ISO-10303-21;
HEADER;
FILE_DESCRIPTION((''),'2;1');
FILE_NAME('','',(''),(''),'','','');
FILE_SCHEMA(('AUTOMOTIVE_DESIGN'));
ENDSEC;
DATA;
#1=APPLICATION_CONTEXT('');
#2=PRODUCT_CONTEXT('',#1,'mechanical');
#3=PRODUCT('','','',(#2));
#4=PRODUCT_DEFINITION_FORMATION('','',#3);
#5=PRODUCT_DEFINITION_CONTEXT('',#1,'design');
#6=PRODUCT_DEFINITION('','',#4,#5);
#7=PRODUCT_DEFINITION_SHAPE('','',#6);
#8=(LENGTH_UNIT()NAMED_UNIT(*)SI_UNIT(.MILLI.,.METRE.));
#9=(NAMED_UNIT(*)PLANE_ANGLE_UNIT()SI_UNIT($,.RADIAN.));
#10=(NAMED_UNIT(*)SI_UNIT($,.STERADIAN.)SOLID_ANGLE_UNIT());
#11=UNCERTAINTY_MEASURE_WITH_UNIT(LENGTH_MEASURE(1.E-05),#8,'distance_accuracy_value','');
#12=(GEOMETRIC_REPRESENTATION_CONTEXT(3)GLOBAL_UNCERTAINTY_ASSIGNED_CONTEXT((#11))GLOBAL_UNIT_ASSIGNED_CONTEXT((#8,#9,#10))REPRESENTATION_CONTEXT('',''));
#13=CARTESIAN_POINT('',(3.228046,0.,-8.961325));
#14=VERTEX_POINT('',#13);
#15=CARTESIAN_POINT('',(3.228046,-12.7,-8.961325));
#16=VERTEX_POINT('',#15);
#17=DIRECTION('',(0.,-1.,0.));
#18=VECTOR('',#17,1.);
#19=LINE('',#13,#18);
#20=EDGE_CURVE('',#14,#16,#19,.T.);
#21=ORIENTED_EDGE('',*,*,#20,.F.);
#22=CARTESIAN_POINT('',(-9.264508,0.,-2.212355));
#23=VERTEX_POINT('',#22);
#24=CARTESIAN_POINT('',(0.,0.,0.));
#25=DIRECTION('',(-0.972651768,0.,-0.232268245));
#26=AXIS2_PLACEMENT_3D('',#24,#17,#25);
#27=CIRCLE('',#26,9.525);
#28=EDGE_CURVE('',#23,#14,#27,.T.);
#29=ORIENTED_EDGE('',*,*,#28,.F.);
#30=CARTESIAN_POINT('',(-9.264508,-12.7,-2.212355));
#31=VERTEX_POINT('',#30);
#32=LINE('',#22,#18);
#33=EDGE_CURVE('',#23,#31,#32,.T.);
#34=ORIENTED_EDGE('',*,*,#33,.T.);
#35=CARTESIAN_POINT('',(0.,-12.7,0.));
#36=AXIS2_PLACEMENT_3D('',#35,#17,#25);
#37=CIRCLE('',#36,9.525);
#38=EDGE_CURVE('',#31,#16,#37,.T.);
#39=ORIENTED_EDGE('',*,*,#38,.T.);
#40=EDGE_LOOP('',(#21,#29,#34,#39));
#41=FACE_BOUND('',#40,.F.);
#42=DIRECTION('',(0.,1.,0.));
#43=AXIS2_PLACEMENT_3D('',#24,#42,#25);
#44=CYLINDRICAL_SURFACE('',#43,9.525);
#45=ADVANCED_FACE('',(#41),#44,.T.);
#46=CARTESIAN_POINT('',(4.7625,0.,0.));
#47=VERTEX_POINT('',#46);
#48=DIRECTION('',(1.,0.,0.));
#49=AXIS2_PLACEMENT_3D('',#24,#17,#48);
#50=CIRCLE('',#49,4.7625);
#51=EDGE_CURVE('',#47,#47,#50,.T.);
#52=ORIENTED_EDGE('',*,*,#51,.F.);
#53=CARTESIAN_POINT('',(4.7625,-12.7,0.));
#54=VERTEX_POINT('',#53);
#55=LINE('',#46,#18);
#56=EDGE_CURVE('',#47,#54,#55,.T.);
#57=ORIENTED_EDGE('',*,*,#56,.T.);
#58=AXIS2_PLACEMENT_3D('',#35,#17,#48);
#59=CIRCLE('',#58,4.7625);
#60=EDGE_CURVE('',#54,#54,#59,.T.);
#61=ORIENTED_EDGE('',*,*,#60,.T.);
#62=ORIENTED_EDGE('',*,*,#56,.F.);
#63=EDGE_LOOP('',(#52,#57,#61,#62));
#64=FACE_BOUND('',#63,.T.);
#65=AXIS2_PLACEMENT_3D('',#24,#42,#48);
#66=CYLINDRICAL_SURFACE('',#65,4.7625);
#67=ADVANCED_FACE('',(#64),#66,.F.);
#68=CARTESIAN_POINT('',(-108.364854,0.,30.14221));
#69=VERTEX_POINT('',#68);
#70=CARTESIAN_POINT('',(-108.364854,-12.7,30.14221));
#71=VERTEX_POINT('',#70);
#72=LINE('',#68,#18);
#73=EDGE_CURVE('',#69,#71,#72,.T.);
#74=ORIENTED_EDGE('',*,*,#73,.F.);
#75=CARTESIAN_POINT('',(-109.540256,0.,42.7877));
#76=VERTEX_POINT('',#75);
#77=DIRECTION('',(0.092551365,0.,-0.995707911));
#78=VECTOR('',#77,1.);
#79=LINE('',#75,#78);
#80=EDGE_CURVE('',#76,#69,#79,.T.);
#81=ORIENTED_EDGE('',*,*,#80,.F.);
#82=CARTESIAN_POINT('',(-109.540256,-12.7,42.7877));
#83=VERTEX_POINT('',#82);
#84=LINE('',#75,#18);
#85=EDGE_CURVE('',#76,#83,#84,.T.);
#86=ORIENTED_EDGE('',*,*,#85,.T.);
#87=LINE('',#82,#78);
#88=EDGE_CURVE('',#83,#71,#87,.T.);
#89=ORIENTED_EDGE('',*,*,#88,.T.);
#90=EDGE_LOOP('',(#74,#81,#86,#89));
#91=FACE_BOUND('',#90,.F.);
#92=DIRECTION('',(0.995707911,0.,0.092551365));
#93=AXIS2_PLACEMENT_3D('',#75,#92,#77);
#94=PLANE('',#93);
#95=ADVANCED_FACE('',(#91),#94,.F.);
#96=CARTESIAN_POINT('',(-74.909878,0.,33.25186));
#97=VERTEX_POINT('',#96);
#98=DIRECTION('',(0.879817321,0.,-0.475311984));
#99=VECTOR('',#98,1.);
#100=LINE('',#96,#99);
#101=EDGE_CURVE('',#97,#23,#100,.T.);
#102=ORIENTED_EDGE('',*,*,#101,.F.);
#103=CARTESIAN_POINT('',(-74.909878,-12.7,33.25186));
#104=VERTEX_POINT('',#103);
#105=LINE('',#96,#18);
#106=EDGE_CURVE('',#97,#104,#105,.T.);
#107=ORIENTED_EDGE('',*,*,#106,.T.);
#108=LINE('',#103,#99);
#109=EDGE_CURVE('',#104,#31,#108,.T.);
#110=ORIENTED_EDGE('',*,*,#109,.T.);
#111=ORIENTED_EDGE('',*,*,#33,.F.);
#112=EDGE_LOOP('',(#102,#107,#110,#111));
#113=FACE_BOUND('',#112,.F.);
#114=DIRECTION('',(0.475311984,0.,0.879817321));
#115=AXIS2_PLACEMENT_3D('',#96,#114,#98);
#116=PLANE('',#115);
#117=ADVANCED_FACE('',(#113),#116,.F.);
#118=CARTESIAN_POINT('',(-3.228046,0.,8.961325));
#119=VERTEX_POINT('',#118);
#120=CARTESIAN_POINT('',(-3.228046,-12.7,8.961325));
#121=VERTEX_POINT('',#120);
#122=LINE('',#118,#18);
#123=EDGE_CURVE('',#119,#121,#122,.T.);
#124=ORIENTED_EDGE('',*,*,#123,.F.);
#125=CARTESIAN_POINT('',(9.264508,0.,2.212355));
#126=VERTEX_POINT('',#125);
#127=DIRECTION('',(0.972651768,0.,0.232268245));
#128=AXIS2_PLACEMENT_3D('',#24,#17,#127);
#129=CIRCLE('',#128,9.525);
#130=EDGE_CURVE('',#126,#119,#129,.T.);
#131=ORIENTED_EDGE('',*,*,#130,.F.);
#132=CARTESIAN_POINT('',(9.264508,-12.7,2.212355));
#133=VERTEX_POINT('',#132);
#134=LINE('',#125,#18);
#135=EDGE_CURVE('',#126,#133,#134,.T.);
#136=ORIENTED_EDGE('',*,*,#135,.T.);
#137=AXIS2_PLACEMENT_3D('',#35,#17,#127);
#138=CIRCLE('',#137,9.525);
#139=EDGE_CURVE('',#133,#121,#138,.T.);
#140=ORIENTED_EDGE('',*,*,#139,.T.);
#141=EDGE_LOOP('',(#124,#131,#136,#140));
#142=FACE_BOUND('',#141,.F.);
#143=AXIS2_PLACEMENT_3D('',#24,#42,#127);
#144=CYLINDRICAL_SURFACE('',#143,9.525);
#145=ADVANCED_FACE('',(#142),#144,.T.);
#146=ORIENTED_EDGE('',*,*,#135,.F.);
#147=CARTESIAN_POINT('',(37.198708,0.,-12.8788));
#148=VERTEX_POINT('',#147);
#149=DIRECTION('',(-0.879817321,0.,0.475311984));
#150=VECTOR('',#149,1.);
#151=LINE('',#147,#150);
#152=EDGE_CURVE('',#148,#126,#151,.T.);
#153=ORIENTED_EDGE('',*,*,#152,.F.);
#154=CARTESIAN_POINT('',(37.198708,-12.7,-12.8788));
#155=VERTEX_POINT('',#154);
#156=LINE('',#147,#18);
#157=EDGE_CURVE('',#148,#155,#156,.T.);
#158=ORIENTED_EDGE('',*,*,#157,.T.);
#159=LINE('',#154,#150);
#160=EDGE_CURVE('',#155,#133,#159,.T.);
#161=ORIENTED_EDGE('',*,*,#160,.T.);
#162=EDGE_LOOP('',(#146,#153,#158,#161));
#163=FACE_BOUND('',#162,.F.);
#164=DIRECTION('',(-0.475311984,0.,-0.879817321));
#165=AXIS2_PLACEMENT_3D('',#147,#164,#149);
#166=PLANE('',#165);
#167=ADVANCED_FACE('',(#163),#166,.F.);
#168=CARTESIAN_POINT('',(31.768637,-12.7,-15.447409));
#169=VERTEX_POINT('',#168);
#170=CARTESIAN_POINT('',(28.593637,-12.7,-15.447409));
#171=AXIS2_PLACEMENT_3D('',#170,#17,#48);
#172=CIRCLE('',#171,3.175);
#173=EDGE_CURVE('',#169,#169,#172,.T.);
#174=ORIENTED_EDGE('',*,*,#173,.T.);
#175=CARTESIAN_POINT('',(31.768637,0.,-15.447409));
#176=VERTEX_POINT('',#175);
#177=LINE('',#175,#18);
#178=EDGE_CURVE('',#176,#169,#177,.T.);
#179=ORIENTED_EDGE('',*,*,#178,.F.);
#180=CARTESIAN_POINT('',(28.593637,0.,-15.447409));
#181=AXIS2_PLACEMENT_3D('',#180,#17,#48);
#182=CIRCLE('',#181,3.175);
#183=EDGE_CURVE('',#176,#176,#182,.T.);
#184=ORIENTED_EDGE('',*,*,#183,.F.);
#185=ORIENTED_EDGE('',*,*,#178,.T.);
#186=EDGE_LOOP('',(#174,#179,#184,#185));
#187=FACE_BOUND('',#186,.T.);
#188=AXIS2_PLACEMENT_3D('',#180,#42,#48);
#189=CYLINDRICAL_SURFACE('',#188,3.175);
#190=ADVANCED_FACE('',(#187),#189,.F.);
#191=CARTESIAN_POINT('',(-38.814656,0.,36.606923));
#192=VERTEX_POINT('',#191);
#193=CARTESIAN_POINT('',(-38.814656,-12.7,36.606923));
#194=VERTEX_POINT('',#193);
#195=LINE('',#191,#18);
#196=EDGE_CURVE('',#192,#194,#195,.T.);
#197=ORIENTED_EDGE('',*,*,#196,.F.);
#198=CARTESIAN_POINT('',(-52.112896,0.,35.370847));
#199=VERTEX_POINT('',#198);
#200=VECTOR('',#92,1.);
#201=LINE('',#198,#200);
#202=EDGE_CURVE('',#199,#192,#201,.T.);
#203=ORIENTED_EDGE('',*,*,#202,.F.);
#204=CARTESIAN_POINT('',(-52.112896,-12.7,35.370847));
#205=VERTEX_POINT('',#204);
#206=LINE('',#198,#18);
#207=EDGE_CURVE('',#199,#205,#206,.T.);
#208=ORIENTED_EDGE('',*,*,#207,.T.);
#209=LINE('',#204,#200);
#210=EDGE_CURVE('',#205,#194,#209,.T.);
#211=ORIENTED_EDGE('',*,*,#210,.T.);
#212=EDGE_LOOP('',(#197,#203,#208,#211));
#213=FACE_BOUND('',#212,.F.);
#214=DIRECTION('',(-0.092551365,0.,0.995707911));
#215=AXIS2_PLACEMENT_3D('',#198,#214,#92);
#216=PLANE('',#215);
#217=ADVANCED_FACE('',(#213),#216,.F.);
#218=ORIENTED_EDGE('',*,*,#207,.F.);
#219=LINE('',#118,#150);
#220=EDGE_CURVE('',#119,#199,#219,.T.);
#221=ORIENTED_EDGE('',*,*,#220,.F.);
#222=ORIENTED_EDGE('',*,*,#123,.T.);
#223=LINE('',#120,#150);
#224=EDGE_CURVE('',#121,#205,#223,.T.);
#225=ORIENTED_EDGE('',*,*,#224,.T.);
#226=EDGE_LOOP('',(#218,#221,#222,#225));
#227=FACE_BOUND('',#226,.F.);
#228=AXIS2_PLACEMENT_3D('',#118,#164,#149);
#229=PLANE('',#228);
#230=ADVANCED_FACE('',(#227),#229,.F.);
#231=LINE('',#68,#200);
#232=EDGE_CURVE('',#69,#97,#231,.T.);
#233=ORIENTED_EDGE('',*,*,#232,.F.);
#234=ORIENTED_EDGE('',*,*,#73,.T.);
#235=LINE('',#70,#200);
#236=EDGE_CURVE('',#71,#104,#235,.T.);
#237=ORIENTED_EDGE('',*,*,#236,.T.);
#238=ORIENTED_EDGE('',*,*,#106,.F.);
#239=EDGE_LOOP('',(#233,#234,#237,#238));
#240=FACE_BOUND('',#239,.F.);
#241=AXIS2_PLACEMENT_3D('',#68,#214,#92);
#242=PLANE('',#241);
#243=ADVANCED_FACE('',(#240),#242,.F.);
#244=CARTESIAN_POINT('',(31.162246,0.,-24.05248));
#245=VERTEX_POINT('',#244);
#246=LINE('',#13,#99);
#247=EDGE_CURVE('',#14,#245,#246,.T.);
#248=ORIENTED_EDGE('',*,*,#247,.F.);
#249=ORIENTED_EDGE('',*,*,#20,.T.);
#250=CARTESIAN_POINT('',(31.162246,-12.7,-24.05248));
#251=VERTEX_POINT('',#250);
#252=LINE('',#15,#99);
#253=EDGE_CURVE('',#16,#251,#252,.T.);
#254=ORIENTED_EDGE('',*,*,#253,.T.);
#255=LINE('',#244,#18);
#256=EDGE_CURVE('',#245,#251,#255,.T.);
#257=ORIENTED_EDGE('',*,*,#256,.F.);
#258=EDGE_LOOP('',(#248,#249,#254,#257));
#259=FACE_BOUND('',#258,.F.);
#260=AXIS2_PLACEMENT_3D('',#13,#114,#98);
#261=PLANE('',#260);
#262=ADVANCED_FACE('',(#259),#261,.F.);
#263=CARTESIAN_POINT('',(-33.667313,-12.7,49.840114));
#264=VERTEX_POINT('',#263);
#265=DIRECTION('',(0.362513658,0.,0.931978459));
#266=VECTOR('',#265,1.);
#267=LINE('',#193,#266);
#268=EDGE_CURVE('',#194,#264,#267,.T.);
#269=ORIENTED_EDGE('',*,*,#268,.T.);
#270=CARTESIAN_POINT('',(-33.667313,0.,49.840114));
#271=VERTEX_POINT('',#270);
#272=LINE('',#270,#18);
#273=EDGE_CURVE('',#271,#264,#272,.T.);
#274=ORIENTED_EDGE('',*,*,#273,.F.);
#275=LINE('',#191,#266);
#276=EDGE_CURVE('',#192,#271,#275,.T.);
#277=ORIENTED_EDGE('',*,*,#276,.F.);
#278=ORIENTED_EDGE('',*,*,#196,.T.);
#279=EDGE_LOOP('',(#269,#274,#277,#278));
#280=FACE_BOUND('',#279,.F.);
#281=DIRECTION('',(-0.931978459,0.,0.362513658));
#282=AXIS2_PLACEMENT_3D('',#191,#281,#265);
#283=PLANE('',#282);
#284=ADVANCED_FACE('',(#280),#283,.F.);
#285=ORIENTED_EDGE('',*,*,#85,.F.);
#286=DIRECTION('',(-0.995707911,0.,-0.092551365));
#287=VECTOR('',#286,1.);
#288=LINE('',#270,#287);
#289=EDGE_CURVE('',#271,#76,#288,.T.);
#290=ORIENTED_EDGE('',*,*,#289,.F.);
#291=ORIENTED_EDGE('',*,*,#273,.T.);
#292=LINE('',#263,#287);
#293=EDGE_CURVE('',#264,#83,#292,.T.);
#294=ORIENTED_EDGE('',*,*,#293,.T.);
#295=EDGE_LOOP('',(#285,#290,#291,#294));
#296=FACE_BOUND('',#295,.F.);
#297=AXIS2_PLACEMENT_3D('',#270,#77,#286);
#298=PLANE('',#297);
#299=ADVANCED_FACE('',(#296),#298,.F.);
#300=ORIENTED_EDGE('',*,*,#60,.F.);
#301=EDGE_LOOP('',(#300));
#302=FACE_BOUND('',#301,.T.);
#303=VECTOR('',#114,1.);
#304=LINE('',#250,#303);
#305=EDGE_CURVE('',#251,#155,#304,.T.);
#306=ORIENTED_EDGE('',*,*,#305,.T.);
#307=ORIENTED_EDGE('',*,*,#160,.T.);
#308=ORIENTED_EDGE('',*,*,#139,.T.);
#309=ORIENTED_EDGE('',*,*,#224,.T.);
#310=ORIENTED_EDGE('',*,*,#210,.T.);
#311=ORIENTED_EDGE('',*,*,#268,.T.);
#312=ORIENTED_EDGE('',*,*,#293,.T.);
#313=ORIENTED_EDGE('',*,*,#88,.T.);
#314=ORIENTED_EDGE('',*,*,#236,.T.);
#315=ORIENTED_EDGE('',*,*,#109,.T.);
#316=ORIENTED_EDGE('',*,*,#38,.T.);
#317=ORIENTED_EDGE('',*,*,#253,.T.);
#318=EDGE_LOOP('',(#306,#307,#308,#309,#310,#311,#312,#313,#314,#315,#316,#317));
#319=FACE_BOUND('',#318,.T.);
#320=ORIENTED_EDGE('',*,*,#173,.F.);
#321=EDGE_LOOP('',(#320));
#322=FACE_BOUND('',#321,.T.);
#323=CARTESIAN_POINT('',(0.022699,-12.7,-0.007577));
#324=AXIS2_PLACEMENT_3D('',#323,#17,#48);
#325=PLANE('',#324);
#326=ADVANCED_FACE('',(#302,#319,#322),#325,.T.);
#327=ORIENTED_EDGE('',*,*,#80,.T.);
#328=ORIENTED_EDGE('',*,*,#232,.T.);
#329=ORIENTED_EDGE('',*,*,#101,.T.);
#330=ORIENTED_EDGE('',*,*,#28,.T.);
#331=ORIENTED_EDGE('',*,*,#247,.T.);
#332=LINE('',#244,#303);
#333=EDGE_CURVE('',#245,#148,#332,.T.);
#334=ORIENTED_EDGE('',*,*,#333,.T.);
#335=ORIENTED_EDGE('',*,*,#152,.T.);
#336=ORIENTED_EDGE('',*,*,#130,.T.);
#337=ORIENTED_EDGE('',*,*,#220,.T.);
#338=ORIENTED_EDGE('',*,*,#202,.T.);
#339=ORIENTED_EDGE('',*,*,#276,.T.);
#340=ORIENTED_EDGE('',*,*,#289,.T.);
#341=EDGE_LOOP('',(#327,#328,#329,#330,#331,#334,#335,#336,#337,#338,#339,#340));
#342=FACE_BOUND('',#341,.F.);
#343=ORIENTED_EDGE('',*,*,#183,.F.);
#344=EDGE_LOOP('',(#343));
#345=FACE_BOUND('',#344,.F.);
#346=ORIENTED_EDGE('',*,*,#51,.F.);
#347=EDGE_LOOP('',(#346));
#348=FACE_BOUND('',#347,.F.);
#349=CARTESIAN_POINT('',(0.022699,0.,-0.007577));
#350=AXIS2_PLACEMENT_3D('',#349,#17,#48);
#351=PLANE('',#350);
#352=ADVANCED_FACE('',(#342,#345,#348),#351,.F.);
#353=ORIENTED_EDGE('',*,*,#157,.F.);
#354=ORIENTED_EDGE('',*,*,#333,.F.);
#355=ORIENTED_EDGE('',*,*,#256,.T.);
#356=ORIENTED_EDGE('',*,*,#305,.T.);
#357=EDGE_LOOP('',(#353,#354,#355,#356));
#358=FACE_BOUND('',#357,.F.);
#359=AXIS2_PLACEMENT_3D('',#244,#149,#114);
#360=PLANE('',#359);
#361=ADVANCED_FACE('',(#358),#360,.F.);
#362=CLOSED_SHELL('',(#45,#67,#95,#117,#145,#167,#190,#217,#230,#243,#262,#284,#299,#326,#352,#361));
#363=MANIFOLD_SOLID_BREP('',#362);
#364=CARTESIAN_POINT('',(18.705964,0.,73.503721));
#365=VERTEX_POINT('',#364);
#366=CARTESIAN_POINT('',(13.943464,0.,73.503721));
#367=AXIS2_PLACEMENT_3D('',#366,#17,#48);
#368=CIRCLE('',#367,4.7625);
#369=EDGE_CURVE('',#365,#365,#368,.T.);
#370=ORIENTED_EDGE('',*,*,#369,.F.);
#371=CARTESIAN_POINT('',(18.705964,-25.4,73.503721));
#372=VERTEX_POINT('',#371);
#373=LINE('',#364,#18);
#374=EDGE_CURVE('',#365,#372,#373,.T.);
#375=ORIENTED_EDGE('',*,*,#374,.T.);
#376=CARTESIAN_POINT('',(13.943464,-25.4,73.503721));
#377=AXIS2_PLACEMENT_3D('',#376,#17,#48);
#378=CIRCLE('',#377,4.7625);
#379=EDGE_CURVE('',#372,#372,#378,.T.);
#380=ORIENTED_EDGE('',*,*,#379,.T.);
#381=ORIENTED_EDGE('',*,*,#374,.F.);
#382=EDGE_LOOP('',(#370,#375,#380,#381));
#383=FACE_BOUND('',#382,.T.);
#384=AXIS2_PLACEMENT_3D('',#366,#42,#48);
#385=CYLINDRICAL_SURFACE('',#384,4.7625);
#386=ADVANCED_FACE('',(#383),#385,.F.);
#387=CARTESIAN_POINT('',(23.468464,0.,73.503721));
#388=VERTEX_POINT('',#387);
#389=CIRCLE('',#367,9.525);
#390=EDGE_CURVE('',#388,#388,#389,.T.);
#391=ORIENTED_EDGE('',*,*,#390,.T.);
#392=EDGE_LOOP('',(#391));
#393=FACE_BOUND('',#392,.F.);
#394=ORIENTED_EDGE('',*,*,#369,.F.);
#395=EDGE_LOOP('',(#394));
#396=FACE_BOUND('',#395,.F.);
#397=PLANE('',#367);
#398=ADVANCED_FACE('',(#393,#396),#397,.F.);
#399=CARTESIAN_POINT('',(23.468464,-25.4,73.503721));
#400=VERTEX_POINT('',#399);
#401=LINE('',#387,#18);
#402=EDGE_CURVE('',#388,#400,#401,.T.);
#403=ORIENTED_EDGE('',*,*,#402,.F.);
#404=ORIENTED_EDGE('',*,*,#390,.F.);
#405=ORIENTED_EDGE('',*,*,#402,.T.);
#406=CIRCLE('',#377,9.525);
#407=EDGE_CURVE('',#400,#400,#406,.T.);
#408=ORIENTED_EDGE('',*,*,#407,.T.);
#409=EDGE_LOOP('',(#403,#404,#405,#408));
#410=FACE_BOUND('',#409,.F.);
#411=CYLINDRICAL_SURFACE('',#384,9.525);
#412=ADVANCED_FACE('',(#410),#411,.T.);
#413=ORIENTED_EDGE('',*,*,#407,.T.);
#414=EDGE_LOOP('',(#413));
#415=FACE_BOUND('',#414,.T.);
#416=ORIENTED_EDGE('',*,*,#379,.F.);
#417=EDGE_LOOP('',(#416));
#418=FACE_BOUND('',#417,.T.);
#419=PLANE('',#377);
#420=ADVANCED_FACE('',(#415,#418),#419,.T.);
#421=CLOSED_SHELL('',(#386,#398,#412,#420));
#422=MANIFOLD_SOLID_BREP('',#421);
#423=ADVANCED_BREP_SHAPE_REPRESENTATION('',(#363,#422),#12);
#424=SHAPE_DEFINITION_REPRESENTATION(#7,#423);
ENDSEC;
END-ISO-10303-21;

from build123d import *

# Parameters (mm, degrees)
F0_R     = 4.7625
F0_R_2   = 3.175
F1_DEPTH = 12.7
F0_R_3   = 9.525
F2_DEPTH = 25.4


# Not quite as in the source:
# - a feature names something its author has since deleted; it is built from what else it names


with BuildPart() as f1:
    # F0 (on Front) → F1 (new body)
    with BuildSketch(Plane.XZ):
        with BuildLine():
            ThreePointArc((3.2280459011, -8.9613249389), (7.7933549325, -5.4762435935), (9.525, 0))
            ThreePointArc((9.525, 0), (9.459652863, 1.1138189762), (9.264508092, 2.2123550376))
            ThreePointArc((9.264508092, 2.2123550376), (4.5273466432, 8.3802599824), (-3.2280459011, 8.9613249389))
            ThreePointArc((-3.2280459011, 8.9613249389), (-8.3802599824, 4.5273466432), (-9.264508092, -2.2123550376))
            ThreePointArc((-9.264508092, -2.2123550376), (-4.5273466432, -8.3802599824), (3.2280459011, -8.9613249389))
        make_face()
        Circle(F0_R, mode=Mode.SUBTRACT)
        with BuildLine():
            ThreePointArc((9.264508092, 2.2123550376), (9.459652863, 1.1138189762), (9.525, 0))
            ThreePointArc((9.525, 0), (7.7933549325, -5.4762435935), (3.2280459011, -8.9613249389))
            Line((3.2280459011, -8.9613249389), (31.1622458424, -24.0524804162))
            Line((31.1622458424, -24.0524804162), (37.1987080333, -12.8788004396))
            Line((37.1987080333, -12.8788004396), (9.264508092, 2.2123550376))
        make_face()
        with Locations((28.5936369496, -15.4474093325)):
            Circle(F0_R_2, mode=Mode.SUBTRACT)
        with BuildLine():
            ThreePointArc((-9.264508092, -2.2123550376), (-8.3802599824, 4.5273466432), (-3.2280459011, 8.9613249389))
            Line((-3.2280459011, 8.9613249389), (-52.1128957984, 35.3708470241))
            Line((-52.1128957984, 35.3708470241), (-74.9098779541, 33.251860334))
            Line((-74.9098779541, 33.251860334), (-9.264508092, -2.2123550376))
        make_face()
        Polygon((-74.9098779541, 33.251860334), (-52.1128957984, 35.3708470241), (-38.8146562076, 36.6069225934), (-33.6673133028, 49.8401142349), (-109.5402561535, 42.787700238), (-108.3648538207, 30.1422097629), align=None)
    extrude(amount=F1_DEPTH)


with BuildPart() as f2:
    # F0 (on Front) → F2 (new body)
    with BuildSketch(Plane.XZ):
        with Locations((13.9434637961, 73.5037211458)):
            Circle(F0_R_3)
        with Locations((13.9434637961, 73.5037211458)):
            Circle(F0_R, mode=Mode.SUBTRACT)
    extrude(amount=F2_DEPTH)


solid = Compound([f1.part, f2.part])
